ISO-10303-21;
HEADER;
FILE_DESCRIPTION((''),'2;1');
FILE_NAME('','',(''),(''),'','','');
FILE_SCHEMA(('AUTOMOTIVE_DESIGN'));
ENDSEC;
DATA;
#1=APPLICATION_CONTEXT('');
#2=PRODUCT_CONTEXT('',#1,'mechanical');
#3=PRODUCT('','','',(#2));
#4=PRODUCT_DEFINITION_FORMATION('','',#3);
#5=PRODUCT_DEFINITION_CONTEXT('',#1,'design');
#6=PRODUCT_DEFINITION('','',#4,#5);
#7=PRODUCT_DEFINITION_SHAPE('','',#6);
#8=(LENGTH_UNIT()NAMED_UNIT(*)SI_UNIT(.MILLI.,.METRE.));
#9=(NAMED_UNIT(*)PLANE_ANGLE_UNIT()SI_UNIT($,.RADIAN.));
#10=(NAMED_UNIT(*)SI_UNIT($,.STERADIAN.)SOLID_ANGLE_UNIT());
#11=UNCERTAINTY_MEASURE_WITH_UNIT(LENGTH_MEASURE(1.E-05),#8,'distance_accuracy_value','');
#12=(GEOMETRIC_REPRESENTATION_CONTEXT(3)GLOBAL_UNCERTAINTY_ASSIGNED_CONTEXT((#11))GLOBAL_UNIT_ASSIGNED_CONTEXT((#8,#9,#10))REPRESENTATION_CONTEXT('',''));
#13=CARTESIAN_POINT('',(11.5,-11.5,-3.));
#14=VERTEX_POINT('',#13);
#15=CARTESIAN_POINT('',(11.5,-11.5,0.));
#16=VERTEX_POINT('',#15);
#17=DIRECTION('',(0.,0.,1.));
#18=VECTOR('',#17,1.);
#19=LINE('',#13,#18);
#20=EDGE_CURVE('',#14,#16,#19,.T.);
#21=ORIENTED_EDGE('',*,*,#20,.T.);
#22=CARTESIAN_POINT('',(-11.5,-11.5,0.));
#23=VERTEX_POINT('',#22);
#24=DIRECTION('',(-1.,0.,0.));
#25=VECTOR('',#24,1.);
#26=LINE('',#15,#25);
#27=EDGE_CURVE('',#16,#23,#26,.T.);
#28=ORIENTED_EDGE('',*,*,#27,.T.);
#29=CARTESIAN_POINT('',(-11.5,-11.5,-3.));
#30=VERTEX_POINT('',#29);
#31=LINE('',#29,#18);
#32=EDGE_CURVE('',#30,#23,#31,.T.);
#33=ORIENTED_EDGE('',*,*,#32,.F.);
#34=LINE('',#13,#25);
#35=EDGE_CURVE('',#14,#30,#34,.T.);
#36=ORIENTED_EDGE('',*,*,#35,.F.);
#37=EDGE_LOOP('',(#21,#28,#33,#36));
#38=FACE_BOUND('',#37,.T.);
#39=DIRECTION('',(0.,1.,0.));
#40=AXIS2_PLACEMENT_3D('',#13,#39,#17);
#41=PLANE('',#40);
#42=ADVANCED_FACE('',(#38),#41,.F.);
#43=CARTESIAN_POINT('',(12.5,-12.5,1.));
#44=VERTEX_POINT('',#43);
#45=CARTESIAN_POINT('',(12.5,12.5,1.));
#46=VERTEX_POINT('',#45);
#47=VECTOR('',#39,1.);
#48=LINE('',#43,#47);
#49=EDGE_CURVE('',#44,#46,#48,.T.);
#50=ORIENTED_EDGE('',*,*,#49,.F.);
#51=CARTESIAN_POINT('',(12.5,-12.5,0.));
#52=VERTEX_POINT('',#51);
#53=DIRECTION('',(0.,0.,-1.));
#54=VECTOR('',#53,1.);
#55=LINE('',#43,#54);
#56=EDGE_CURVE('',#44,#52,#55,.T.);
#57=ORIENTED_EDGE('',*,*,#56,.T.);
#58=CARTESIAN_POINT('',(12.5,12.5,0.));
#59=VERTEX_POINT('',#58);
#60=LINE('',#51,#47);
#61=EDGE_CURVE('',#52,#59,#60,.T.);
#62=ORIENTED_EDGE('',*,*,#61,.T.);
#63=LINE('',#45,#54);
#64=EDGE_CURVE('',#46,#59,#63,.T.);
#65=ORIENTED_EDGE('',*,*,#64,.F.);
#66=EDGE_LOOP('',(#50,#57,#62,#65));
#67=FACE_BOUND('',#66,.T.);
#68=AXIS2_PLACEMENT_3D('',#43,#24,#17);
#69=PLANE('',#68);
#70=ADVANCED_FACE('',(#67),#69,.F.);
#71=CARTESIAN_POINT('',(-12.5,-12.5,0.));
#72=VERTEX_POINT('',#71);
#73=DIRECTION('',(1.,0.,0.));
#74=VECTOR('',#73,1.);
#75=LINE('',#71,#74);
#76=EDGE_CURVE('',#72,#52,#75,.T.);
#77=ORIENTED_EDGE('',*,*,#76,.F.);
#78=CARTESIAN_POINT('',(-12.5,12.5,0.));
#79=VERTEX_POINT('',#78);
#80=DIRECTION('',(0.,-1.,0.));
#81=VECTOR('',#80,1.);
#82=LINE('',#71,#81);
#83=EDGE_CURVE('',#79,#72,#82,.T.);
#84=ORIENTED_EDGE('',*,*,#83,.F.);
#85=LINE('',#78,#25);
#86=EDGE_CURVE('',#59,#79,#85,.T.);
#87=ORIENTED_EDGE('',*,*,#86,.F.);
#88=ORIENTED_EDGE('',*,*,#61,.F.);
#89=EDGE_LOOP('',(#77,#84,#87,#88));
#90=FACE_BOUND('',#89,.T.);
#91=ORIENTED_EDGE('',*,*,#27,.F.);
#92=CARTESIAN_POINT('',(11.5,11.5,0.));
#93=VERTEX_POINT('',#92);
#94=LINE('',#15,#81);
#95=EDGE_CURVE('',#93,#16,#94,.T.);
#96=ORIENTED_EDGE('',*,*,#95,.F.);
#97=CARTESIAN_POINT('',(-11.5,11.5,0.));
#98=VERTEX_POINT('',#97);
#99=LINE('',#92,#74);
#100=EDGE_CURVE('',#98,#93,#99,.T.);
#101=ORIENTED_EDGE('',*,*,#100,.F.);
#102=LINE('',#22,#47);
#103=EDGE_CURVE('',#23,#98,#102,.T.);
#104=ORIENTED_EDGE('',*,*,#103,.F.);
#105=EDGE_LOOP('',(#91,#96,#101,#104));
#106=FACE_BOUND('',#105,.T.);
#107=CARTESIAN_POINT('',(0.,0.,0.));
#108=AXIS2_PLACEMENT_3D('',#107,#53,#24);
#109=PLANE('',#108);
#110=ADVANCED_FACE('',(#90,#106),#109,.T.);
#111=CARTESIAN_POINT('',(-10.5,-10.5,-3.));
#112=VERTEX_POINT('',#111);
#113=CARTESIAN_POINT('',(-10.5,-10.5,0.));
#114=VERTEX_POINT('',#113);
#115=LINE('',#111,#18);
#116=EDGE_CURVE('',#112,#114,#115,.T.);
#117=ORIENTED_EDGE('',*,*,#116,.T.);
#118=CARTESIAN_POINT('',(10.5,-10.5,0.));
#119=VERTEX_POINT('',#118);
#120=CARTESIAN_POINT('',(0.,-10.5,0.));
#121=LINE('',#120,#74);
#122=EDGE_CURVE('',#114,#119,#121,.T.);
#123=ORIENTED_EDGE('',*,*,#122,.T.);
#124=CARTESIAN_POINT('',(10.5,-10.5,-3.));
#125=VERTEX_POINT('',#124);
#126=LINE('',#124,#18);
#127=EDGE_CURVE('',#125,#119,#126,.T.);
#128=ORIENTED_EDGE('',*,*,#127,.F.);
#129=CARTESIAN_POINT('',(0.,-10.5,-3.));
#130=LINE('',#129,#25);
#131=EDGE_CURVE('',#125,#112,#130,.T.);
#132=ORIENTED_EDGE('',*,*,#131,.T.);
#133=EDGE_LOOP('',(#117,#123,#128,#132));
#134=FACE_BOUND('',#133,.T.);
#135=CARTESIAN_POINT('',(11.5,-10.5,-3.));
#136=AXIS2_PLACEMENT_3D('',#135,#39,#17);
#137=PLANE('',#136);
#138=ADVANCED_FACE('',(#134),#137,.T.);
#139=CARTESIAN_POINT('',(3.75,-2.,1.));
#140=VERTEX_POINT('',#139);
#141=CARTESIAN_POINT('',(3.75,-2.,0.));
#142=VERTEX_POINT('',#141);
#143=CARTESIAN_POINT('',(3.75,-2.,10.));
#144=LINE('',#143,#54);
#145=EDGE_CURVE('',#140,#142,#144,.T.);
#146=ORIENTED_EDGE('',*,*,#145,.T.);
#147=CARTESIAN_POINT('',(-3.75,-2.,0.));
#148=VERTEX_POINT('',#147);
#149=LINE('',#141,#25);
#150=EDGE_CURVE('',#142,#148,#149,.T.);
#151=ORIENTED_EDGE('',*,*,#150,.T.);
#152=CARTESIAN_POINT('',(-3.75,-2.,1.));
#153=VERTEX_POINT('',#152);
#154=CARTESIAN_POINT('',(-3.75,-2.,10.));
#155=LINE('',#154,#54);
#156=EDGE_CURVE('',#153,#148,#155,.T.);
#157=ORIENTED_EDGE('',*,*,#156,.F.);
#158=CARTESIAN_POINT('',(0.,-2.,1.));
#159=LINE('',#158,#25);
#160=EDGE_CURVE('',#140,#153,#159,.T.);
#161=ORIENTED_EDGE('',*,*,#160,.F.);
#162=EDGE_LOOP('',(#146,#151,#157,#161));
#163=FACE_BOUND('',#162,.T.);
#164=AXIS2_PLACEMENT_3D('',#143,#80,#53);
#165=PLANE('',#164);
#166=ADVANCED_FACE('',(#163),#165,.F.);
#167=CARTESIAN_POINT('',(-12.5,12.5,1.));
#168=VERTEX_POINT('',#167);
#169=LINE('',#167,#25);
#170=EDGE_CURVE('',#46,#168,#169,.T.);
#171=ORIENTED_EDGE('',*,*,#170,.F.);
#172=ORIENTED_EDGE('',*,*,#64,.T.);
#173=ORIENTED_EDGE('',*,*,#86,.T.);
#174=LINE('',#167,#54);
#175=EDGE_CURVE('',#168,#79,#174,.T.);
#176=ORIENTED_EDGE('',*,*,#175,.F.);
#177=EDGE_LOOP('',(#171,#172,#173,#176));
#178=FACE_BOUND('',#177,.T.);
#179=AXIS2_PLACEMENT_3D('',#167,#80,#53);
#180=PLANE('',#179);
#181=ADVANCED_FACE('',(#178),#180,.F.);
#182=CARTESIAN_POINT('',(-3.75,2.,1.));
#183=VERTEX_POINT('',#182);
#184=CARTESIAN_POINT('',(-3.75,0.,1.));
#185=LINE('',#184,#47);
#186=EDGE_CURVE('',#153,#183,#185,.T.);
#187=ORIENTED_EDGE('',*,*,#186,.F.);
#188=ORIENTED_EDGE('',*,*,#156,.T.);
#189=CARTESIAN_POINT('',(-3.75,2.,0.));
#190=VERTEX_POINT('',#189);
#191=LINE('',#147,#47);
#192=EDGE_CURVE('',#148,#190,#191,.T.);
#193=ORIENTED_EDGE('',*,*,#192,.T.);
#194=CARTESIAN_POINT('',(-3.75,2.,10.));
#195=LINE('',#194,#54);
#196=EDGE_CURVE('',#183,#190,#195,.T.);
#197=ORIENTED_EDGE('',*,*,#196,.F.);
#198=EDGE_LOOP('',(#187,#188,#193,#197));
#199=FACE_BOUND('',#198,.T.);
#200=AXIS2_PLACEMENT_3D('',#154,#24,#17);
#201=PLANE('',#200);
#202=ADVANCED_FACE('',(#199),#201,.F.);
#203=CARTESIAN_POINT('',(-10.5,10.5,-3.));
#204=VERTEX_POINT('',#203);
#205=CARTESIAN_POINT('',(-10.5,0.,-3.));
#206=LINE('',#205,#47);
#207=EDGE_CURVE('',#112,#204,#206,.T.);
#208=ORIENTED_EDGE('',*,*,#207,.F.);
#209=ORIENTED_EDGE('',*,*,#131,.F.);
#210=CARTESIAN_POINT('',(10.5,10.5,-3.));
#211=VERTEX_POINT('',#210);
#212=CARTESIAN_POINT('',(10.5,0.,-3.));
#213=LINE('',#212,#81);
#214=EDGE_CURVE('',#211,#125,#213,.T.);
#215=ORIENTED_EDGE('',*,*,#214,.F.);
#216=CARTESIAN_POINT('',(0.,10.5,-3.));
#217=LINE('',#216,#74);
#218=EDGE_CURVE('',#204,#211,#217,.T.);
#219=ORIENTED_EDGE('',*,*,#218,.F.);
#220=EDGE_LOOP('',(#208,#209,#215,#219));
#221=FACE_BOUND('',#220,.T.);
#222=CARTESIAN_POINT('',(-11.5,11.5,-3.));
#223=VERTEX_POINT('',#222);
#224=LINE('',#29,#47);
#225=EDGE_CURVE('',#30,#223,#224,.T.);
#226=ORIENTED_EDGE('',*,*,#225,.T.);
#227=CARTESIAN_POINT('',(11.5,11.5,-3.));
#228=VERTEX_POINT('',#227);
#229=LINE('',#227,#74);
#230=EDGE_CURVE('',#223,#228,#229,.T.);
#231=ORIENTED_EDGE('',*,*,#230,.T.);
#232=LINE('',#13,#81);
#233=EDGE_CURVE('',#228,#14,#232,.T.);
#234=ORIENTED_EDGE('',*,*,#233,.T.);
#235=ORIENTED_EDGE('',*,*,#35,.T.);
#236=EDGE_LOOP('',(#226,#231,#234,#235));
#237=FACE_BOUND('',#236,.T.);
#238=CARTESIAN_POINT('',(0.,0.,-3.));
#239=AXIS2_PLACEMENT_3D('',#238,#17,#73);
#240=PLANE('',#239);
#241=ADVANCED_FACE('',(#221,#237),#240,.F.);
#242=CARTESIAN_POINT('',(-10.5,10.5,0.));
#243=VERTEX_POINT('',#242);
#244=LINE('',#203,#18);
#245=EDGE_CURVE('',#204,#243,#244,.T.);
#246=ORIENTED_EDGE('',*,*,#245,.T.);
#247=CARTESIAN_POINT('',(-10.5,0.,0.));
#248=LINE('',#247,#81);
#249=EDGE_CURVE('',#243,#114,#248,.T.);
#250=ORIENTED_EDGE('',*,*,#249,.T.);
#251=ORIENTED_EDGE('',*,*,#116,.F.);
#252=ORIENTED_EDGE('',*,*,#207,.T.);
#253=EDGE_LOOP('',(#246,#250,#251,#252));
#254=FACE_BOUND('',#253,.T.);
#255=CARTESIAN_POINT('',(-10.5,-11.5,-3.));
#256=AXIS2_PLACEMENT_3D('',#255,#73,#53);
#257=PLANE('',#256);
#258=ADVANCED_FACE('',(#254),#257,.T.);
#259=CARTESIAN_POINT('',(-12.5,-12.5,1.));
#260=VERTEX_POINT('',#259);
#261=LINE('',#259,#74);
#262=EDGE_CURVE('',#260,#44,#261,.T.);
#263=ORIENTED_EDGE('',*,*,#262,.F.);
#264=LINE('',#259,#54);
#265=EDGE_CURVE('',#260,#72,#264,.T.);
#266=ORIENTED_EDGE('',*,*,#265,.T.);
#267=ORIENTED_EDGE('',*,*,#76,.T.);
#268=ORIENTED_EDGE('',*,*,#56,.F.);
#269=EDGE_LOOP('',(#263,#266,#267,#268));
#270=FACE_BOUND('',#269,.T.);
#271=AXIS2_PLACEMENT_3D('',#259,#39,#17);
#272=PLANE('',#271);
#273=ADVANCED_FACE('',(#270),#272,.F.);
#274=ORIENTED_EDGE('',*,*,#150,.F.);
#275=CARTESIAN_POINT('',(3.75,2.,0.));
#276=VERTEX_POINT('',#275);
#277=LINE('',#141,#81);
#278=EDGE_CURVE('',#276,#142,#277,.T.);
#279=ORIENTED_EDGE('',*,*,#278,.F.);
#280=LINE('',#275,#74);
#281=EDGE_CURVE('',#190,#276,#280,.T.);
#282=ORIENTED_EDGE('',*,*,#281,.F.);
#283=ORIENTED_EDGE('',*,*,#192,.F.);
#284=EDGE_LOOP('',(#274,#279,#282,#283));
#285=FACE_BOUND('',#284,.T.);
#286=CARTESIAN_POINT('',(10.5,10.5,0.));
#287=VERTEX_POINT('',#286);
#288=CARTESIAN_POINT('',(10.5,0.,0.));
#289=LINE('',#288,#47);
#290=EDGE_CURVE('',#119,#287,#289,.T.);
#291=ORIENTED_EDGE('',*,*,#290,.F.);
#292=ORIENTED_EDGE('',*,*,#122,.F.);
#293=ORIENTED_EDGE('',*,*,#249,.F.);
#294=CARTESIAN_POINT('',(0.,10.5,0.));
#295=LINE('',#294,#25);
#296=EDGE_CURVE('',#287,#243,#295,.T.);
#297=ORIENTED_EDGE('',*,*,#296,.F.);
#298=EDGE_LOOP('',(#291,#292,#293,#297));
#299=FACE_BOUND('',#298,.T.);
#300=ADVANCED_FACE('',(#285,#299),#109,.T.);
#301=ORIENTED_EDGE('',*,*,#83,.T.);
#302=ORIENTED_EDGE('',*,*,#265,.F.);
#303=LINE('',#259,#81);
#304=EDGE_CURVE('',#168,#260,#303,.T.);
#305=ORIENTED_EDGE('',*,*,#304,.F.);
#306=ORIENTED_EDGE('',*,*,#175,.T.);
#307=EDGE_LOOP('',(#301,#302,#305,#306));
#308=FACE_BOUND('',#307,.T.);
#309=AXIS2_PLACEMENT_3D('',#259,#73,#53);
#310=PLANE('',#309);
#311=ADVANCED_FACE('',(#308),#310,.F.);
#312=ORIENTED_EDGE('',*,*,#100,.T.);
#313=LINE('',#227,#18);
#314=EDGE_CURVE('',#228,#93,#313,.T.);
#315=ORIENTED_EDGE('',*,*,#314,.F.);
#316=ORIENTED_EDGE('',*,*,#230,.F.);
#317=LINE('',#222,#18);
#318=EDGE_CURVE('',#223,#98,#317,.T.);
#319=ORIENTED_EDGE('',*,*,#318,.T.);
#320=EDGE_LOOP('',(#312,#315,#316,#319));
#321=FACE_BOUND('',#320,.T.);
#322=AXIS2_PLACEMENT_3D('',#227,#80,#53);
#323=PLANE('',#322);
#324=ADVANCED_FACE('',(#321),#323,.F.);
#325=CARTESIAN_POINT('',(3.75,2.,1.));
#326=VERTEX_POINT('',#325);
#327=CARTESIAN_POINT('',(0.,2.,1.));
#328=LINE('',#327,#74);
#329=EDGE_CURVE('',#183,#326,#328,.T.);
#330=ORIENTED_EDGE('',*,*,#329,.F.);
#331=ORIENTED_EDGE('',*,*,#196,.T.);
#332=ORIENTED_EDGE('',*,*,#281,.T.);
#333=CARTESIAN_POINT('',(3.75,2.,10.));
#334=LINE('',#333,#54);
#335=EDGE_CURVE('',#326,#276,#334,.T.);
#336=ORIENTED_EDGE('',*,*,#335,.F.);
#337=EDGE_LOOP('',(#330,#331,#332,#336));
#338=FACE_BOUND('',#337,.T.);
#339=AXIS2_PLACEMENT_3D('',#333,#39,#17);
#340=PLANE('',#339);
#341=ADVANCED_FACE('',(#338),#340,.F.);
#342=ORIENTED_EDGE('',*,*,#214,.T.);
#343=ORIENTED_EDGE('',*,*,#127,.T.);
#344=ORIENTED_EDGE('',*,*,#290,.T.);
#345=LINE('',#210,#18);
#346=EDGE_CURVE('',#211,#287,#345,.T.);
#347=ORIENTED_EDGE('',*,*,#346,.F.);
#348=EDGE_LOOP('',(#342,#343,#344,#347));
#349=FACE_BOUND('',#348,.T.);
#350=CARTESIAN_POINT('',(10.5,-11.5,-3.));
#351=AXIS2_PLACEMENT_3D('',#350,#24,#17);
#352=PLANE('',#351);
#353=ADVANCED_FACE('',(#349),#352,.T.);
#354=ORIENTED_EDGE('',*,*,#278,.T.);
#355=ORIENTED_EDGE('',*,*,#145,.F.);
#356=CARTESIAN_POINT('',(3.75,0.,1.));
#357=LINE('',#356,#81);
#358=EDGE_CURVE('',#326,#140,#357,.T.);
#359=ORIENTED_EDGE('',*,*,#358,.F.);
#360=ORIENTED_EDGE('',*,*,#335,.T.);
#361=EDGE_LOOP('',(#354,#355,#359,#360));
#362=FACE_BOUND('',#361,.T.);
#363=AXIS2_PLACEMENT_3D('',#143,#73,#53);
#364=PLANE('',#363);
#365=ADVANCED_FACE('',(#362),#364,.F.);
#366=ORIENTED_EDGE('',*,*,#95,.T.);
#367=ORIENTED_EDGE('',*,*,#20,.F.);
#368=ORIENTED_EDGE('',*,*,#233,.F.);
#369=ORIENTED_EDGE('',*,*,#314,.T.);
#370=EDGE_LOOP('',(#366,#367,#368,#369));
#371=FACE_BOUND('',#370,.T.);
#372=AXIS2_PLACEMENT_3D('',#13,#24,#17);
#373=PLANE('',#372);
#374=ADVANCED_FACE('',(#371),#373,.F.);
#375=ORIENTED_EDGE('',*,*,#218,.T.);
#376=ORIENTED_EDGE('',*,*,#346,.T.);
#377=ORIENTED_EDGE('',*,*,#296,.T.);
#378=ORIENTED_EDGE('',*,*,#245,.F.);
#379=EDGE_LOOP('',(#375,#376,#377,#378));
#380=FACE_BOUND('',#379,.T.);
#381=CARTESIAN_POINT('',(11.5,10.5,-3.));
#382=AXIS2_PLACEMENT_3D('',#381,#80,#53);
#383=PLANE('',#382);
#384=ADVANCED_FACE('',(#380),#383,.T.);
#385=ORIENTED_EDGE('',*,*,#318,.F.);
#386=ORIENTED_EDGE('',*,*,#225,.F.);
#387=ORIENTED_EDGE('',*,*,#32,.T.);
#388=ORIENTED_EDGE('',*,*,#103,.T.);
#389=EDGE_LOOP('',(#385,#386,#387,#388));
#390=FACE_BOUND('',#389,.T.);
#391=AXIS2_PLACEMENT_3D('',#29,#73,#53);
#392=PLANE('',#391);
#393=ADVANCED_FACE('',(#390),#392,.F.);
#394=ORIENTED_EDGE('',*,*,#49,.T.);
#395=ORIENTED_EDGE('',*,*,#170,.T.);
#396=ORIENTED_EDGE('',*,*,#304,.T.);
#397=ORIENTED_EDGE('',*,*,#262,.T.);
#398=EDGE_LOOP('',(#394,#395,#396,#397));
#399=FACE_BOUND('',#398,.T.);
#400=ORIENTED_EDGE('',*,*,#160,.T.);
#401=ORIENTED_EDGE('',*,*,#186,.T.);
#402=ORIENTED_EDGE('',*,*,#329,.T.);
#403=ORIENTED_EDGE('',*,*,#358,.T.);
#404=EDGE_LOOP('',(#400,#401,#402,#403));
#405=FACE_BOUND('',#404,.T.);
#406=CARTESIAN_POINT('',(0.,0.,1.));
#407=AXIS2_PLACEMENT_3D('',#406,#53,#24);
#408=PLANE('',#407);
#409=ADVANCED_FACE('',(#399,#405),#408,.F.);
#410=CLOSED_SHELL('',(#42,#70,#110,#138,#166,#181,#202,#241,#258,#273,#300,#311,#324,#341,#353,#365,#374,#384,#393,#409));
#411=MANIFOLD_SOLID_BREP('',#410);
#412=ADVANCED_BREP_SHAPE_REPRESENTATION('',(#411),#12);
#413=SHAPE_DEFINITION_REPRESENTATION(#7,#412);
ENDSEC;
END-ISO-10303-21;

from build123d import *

# Parameters (mm, degrees)
SKETCH1_W           = 25
SKETCH1_H           = 25
BOSS_EXTRUDE1_DEPTH = 1
SKETCH2_W           = 23
SKETCH2_H           = 23
BOSS_EXTRUDE2_DEPTH = 3
SHELL1_START        = -3
SHELL1_OUTLINE_W    = 21
SHELL1_OUTLINE_H    = 21
SHELL1_DEPTH        = 3
SKETCH3_W           = 7.5
SKETCH3_H           = 4
CUT_EXTRUDE1_DEPTH  = 10


# Read off the part's stored shape, not the designer's step: Shell1
with BuildPart() as part:
    # Sketch1 → Boss-Extrude1 (new body)
    with BuildSketch(Plane.XY):
        Rectangle(SKETCH1_W, SKETCH1_H)
    extrude(amount=BOSS_EXTRUDE1_DEPTH)

    # Sketch2 → Boss-Extrude2 (add)
    with BuildSketch(Plane(origin=(0, 0, 0), x_dir=(-1, 0, 0), z_dir=(0, 0, -1))):
        Rectangle(SKETCH2_W, SKETCH2_H)
    extrude(amount=BOSS_EXTRUDE2_DEPTH)

    # Shell1 outline → Shell1 (cut)
    with BuildSketch(Plane.XY.offset(SHELL1_START)):
        Rectangle(SHELL1_OUTLINE_W, SHELL1_OUTLINE_H)
    extrude(amount=SHELL1_DEPTH, mode=Mode.SUBTRACT)

    # Sketch3 → Cut-Extrude1 (cut)
    with BuildSketch(Plane(origin=(0, 0, 0), x_dir=(-1, 0, 0), z_dir=(0, 0, -1))):
        Rectangle(SKETCH3_W, SKETCH3_H)
    extrude(amount=-CUT_EXTRUDE1_DEPTH, mode=Mode.SUBTRACT)


solid = part.part
